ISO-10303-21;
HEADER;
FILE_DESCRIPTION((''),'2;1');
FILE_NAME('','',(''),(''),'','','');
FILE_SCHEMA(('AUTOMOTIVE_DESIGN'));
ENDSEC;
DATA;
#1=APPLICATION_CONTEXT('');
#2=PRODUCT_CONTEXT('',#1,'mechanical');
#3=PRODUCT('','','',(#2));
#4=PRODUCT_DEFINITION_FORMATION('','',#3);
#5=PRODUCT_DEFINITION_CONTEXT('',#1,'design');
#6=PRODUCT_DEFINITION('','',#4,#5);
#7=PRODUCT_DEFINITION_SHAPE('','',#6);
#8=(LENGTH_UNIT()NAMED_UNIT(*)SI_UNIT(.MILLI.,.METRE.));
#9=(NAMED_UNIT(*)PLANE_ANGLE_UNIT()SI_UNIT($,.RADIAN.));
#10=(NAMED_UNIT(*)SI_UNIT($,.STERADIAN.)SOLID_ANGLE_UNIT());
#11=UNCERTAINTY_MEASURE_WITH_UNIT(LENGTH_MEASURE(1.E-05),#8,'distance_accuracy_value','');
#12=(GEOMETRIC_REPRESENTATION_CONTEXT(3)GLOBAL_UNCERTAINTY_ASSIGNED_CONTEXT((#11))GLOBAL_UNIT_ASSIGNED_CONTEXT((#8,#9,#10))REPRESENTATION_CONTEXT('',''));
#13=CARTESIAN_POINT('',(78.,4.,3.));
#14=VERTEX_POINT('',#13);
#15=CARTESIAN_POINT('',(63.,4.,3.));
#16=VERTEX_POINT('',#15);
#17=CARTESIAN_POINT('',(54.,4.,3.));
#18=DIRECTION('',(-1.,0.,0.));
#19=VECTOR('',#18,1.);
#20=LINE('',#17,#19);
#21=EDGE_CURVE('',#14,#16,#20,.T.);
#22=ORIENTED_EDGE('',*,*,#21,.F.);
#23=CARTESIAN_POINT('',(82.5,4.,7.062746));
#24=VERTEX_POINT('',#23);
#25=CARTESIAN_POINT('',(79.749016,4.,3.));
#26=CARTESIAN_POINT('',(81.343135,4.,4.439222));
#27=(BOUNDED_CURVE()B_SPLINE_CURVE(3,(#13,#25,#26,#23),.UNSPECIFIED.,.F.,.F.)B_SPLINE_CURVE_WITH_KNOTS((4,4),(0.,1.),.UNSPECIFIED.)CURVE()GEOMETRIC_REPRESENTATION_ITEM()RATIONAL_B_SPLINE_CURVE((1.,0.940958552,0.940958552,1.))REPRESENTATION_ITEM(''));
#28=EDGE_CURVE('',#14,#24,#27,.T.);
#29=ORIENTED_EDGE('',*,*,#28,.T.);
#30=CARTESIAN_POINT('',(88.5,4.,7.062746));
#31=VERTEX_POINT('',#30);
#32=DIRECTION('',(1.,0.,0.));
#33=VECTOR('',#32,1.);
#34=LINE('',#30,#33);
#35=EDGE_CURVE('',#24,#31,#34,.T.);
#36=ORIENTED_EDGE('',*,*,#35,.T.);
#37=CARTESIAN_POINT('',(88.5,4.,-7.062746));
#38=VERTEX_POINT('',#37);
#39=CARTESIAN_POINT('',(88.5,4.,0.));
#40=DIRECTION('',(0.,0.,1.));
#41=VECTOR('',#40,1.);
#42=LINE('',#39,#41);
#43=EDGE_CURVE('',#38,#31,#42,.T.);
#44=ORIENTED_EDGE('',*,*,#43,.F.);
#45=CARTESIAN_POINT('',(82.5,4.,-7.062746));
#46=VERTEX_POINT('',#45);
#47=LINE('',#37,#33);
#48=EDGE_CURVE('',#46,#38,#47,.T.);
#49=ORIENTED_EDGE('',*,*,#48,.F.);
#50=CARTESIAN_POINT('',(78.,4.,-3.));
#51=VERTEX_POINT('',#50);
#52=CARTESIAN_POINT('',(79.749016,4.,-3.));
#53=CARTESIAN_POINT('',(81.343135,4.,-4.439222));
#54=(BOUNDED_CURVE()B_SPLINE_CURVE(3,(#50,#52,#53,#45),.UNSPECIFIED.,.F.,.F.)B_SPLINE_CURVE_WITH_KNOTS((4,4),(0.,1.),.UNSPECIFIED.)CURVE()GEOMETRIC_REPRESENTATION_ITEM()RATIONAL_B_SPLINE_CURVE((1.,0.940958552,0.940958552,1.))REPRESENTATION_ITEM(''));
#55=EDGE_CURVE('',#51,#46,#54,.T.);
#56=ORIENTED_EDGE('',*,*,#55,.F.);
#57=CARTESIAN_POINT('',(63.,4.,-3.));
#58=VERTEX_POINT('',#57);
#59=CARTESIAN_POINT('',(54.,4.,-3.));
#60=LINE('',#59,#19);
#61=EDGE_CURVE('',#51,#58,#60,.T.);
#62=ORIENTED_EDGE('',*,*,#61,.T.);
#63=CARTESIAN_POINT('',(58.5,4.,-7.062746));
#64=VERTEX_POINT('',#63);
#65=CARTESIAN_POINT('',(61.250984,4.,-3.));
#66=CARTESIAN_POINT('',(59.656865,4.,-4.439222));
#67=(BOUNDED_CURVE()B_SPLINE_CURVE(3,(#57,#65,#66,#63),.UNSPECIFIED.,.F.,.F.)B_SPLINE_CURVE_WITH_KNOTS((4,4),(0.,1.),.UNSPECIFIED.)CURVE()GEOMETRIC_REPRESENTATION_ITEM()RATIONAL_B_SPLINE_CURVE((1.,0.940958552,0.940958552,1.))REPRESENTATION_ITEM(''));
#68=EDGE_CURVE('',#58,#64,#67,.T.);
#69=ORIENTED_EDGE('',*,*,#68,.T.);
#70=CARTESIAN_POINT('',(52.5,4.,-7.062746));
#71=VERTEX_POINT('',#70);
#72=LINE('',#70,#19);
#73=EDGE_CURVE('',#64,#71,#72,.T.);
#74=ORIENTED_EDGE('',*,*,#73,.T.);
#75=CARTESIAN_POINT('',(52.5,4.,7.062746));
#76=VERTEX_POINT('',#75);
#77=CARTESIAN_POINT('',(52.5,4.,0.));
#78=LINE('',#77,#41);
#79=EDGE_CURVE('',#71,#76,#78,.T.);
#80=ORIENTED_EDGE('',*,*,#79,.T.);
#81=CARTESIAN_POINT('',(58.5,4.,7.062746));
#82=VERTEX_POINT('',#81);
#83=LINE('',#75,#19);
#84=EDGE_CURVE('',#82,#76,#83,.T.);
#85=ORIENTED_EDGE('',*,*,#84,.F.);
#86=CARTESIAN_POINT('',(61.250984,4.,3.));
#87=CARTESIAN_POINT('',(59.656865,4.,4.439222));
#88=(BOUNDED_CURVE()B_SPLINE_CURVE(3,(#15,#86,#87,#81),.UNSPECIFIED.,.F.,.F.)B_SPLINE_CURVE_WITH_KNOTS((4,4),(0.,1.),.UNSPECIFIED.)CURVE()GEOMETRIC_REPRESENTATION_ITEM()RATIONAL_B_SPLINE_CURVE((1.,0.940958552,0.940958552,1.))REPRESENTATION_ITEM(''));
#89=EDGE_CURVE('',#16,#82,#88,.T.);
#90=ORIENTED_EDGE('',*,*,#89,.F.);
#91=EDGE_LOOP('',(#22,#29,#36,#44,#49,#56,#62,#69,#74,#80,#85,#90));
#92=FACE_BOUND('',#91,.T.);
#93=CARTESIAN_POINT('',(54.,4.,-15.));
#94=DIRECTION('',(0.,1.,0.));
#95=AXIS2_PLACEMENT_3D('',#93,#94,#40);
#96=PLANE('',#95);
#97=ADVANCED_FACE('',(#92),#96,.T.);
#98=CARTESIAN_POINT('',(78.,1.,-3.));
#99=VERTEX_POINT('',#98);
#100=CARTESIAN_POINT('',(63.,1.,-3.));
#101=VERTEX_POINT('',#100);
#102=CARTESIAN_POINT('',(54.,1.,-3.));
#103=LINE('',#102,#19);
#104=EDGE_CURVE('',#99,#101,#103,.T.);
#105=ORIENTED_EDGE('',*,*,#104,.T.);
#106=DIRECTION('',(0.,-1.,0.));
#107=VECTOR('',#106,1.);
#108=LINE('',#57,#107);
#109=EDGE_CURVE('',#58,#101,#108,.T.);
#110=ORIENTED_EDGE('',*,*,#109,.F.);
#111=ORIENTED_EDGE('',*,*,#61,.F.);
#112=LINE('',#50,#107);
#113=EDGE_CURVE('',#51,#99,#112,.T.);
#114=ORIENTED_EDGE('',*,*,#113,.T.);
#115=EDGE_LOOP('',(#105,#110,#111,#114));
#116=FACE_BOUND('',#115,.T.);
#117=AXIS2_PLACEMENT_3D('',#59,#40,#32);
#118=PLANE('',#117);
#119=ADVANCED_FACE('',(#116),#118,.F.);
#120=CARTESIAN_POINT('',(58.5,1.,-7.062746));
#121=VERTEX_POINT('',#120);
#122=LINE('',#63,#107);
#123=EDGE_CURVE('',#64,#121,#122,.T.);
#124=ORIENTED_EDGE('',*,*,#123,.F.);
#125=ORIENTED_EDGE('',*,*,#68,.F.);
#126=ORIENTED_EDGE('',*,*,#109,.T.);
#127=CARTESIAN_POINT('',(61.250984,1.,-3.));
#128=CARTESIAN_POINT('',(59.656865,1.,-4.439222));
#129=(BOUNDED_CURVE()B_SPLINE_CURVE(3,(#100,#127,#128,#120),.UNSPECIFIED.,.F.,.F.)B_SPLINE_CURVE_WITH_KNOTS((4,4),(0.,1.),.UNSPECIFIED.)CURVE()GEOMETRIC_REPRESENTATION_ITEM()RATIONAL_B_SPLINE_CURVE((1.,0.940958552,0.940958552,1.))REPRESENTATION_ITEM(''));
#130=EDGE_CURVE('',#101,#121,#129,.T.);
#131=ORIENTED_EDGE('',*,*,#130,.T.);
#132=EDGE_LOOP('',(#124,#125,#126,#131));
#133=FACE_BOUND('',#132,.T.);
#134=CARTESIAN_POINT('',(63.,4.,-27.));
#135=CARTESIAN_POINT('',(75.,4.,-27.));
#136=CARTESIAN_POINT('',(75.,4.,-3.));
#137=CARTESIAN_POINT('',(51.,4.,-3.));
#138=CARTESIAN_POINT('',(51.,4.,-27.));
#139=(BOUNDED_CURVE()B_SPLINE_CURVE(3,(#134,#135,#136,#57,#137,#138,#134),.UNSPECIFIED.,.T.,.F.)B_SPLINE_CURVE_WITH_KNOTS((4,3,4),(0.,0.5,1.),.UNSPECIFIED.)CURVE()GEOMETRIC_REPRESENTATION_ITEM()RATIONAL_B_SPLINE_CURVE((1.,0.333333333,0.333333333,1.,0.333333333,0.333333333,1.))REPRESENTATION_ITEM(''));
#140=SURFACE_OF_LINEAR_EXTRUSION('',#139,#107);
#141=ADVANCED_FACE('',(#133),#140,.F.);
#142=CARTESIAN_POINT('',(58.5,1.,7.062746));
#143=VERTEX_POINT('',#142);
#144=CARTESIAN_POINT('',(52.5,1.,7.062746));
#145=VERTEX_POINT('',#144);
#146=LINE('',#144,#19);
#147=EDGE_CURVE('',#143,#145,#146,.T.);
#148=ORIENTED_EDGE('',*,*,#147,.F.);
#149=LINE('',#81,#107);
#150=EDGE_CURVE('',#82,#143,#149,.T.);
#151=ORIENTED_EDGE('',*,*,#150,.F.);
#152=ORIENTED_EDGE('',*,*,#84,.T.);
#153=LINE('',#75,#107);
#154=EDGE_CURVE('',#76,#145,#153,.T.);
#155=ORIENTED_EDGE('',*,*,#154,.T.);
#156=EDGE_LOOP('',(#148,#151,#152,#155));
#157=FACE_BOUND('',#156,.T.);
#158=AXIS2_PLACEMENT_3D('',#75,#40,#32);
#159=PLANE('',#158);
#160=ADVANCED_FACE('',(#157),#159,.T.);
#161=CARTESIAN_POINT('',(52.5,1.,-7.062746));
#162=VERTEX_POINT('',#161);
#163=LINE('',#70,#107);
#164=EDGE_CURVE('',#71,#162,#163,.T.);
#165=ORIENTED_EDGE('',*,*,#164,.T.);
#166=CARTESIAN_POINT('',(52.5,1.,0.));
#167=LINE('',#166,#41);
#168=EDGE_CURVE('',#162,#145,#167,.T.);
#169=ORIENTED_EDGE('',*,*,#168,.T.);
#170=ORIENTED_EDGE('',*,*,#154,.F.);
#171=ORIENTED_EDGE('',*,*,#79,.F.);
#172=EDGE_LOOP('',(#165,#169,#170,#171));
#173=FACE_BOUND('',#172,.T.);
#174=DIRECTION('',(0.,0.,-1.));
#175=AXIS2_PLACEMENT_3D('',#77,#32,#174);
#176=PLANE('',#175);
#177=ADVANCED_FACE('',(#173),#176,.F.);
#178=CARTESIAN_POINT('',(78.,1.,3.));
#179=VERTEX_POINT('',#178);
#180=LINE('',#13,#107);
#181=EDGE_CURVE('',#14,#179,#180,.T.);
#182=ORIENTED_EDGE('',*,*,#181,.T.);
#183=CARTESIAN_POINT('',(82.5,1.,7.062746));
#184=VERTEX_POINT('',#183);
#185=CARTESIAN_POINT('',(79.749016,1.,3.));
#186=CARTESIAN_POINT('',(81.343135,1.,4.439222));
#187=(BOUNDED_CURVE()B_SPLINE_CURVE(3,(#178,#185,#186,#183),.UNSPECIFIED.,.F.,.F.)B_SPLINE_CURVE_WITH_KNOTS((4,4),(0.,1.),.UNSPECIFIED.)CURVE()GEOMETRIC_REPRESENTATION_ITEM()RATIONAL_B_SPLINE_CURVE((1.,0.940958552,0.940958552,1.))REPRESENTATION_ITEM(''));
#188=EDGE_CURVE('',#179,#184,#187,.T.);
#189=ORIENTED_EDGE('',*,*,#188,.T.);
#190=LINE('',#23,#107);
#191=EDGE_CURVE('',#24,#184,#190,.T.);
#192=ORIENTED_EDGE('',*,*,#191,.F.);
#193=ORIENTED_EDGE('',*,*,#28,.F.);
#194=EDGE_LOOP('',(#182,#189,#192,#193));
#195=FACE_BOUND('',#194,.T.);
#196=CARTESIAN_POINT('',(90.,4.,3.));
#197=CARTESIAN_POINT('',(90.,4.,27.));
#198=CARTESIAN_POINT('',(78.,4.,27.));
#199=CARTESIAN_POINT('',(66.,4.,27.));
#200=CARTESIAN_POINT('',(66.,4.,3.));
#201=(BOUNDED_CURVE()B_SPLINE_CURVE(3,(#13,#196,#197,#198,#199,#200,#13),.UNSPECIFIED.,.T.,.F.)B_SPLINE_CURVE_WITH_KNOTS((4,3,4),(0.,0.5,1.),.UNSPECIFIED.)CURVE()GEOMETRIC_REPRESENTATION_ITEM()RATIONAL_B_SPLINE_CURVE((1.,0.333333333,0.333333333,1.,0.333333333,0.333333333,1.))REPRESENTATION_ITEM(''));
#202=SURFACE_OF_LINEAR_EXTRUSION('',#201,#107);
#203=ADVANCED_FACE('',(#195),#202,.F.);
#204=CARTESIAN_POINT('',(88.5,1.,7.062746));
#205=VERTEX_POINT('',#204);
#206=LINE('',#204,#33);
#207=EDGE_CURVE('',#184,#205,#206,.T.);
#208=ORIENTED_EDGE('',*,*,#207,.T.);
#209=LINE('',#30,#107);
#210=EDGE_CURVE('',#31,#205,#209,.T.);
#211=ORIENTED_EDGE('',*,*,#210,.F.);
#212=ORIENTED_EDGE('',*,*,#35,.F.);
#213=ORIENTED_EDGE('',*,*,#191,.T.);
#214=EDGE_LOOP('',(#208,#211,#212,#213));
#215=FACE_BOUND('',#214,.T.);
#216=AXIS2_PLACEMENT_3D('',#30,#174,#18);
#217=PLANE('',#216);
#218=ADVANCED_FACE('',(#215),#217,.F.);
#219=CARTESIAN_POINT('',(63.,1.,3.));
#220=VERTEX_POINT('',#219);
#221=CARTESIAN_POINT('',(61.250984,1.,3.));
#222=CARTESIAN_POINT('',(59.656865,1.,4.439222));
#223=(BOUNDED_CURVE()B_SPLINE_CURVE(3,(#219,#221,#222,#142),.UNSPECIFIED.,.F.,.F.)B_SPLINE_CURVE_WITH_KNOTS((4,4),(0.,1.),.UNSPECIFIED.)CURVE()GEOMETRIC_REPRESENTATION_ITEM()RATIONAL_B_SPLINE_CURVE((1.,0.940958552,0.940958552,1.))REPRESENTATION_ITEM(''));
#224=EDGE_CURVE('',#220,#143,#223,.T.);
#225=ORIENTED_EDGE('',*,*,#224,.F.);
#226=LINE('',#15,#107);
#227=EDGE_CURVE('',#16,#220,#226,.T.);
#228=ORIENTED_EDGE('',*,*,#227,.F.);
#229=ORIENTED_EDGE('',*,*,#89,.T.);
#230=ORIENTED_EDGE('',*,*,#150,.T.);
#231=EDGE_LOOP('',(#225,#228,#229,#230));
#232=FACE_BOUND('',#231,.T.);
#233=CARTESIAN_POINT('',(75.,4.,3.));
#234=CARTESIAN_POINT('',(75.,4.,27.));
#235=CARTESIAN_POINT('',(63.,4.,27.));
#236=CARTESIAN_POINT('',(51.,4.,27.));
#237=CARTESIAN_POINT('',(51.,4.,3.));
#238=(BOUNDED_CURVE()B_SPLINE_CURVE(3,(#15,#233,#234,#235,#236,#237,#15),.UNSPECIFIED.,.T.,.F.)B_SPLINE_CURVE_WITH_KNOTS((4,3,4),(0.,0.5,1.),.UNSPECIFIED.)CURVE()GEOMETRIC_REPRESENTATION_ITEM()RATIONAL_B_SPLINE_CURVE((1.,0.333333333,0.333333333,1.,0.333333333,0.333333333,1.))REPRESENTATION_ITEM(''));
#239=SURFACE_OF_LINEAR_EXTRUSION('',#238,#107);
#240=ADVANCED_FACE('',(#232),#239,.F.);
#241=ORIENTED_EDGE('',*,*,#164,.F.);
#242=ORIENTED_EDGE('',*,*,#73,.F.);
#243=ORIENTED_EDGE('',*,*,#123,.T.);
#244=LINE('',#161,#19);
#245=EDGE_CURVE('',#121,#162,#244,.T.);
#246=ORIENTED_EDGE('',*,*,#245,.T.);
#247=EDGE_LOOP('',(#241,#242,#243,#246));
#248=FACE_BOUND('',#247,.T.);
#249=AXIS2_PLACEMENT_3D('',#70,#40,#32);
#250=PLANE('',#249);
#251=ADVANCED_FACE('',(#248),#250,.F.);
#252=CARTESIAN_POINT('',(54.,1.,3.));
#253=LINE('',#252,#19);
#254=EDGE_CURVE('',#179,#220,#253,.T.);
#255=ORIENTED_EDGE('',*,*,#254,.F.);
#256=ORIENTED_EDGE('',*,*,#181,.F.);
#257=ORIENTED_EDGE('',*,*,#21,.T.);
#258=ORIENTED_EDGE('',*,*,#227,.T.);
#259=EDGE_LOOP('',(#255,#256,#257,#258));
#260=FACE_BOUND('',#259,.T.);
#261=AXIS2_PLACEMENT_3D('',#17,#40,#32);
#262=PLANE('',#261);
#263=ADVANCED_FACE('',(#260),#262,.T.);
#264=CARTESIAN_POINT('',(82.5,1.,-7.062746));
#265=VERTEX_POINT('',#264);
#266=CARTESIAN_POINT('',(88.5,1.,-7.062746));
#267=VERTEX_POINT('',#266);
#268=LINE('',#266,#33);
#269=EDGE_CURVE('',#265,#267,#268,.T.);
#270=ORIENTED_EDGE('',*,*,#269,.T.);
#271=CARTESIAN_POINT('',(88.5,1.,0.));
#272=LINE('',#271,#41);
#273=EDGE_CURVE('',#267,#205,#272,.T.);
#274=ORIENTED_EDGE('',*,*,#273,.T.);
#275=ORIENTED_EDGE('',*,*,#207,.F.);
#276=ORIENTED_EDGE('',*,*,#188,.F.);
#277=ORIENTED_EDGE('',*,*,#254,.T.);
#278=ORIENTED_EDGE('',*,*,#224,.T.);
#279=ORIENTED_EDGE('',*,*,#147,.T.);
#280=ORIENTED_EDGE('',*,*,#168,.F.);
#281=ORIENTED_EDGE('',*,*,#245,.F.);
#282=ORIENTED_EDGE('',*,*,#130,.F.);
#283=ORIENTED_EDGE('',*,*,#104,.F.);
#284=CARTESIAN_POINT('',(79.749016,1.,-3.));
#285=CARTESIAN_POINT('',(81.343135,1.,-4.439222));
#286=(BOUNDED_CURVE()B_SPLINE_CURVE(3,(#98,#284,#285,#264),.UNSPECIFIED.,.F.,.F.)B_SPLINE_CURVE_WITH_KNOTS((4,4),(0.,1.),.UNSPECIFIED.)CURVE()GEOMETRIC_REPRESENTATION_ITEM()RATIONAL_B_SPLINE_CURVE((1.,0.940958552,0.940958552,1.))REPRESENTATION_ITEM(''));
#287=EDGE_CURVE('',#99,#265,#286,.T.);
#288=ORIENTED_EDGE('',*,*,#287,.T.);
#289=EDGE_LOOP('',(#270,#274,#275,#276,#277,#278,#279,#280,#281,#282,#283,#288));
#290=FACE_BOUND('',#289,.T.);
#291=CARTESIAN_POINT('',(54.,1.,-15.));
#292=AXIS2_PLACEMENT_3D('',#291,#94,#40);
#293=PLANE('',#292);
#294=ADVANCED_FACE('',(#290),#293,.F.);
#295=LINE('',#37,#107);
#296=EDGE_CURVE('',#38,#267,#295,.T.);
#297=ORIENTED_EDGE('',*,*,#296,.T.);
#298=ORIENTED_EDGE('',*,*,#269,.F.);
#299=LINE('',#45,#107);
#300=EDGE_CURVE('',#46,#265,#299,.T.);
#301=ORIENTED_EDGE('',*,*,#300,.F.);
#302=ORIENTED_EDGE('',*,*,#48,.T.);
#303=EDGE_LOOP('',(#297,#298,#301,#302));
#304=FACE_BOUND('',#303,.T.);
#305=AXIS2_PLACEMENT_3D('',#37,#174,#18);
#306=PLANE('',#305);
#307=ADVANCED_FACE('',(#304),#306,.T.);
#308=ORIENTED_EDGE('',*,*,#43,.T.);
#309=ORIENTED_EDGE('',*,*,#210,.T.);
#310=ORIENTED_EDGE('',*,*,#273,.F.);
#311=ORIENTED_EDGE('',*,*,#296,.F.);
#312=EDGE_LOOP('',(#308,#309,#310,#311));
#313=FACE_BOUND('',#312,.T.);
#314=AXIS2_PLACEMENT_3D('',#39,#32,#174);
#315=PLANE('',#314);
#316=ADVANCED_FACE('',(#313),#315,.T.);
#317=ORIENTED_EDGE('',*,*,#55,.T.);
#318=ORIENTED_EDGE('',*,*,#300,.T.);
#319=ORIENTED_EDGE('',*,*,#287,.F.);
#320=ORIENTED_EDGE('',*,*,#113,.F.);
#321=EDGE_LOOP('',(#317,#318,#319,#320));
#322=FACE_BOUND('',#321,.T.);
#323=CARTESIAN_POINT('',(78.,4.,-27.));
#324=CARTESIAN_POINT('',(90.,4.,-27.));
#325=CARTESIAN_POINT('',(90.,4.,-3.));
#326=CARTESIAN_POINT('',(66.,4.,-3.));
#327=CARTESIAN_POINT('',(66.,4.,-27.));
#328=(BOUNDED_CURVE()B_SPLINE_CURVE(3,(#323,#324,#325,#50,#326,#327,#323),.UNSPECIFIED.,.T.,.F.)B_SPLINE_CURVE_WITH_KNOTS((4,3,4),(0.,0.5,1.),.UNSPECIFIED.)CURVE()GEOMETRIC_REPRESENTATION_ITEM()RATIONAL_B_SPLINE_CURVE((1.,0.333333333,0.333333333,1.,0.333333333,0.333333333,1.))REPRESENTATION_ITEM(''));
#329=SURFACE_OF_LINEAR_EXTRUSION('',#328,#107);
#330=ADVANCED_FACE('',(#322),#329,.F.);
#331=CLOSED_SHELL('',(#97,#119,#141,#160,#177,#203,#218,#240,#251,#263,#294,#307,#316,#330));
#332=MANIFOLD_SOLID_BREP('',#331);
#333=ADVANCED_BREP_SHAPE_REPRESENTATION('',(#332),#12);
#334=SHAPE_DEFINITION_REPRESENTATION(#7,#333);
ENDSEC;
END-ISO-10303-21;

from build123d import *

# Parameters (mm, degrees)
BOSS_EXTRUDE1_DEPTH         = 5
MIRROR1_DEPTH               = 5
SCALE1_SCALE                = 0.6
SCALE2_SCALE_X              = 0.5
SCALE2_SCALE_Y              = 1
SCALE2_SCALE_Z              = 1
SKETCH2_W                   = 9
SKETCH2_H                   = 6
CUT_EXTRUDE1_DEPTH          = 98.801494894
BODY_MOVE_COPY1_START       = 1
BODY_MOVE_COPY1_DEPTH       = 3
BODY_MOVE_COPY1_2_OUTLINE_W = 9
BODY_MOVE_COPY1_2_OUTLINE_H = 6
BODY_MOVE_COPY1_2_DEPTH     = 3


# Read off the part's stored shape, not the designer's step: Mirror1, Body-Move/Copy1
with BuildPart() as part:
    # Sketch1 → Boss-Extrude1 (new body)
    with BuildSketch(Plane(origin=(0, 0, 0), x_dir=(1, 0, 0), z_dir=(0, 1, 0))):
        with BuildLine():
            Line((0, 0), (0, 11.771243445))
            Line((0, 11.771243445), (20, 11.771243445))
            ThreePointArc((20, 11.771243445), (26.771243445, 6.771243445), (35, 5))
            Line((35, 5), (75, 5))
            Line((75, 5), (75, 0))
            Line((75, 0), (0, 0))
        make_face()
    extrude(amount=BOSS_EXTRUDE1_DEPTH)

    # Mirror1 outline → Mirror1 (add)
    with BuildSketch(Plane(origin=(0, 0, 0), x_dir=(1, 0, 0), z_dir=(0, 1, 0))):
        with BuildLine():
            Line((115, 5), (75, 5))
            Line((75, 5), (75, 0))
            Line((75, 0), (0, 0))
            Line((0, 0), (0, -11.771243445))
            Line((0, -11.771243445), (20, -11.771243445))
            ThreePointArc((20, -11.771243445), (26.771243445, -6.771243445), (35, -5))
            Line((35, -5), (115, -5))
            ThreePointArc((115, -5), (123.228756555, -6.771243445), (130, -11.771243445))
            Line((130, -11.771243445), (150, -11.771243445))
            Line((150, -11.771243445), (150, 11.771243445))
            Line((150, 11.771243445), (130, 11.771243445))
            ThreePointArc((130, 11.771243445), (123.228756555, 6.771243445), (115, 5))
        make_face()
    extrude(amount=MIRROR1_DEPTH)


with BuildPart() as part_1:
    # Scale1: scaled about (75, 2.5, 0)
    add(part.part.scale(SCALE1_SCALE).moved(Location((30, 1, 0))))


with BuildPart() as part_2:
    # Scale2: scaled about (75, 2.5, 0)
    add(part_1.part.scale((SCALE2_SCALE_X, SCALE2_SCALE_Y, SCALE2_SCALE_Z), about=(75, 2.5, 0)))

    # Sketch2 → Cut-Extrude1 (cut, through all)
    with BuildSketch(Plane(origin=(0, 4, 0), x_dir=(1, 0, 0), z_dir=(0, 1, 0))):
        with Locations((70.5, 0)):
            Rectangle(SKETCH2_W, SKETCH2_H)
    extrude(amount=-CUT_EXTRUDE1_DEPTH, mode=Mode.SUBTRACT)


with BuildPart() as cut_extrude1_piece_1:
    # of the separate pieces the step leaves, piece 1, a body of its own (cut_extrude1_pieces)
    add(part_2.part.solids().sort_by_distance((75, 1, 3))[0])

    # Body-Move/Copy1 outline → Body-Move/Copy1 (cut)
    with BuildSketch(Plane(origin=(0, 0, 0), x_dir=(1, 0, 0), z_dir=(0, 1, 0)).offset(BODY_MOVE_COPY1_START)):
        with BuildLine():
            add(Edge.make_bspline(
                [(91.5, 7.062746067), (90.655623636, 5.147880462), (89.601040636, 3.949624901), (88.5, 3.381049961)],
                knots=[0.344491118, 0.344491118, 0.344491118, 0.344491118, 0.443649167, 0.443649167, 0.443649167, 0.443649167], degree=3, weights=[0.571428571, 0.621399531, 0.697590007, 0.8]))
            Line((88.5, 3.381049961), (88.5, -3.381049961))
            add(Edge.make_bspline(
                [(88.5, -3.381049961), (89.601040636, -3.949624901), (90.655623636, -5.147880462), (91.5, -7.062746067)],
                knots=[0.056350833, 0.056350833, 0.056350833, 0.056350833, 0.155508882, 0.155508882, 0.155508882, 0.155508882], degree=3, weights=[0.8, 0.697590007, 0.621399531, 0.571428571]))
            Line((91.5, -7.062746067), (97.5, -7.062746067))
            Line((97.5, -7.062746067), (97.5, 7.062746067))
            Line((97.5, 7.062746067), (91.5, 7.062746067))
        make_face()
    extrude(amount=BODY_MOVE_COPY1_DEPTH, mode=Mode.SUBTRACT)

    # Body-Move_Copy1 2 outline → Body-Move_Copy1 2 (add)
    with BuildSketch(Plane(origin=(0, 0, 0), x_dir=(1, 0, 0), z_dir=(0, 1, 0)).offset(BODY_MOVE_COPY1_START)):
        with BuildLine():
            Line((88.5, 7.062746067), (82.5, 7.062746067))
            add(Edge.make_bspline(
                [(82.5, 7.062746067), (81.233643288, 4.190918983), (79.569499126, 3), (78, 3)],
                knots=[0.344491118, 0.344491118, 0.344491118, 0.344491118, 0.5, 0.5, 0.5, 0.5], degree=3, weights=[0.571428571, 0.649797681, 0.792654824, 1]))
            Line((78, 3), (87, 3))
            add(Edge.make_bspline(
                [(88.5, 3.381049961), (87.991386346, 3.118403), (87.487429398, 3), (87, 3)],
                knots=[0.443649167, 0.443649167, 0.443649167, 0.443649167, 0.5, 0.5, 0.5, 0.5], degree=3, weights=[0.8, 0.85819889, 0.924865556, 1]))
            Line((88.5, 3.381049961), (88.5, 7.062746067))
        make_face()
        with Locations((70.5, 0)):
            Rectangle(BODY_MOVE_COPY1_2_OUTLINE_W, BODY_MOVE_COPY1_2_OUTLINE_H)
        with BuildLine():
            Line((88.5, -7.062746067), (88.5, -3.381049961))
            add(Edge.make_bspline(
                [(87, -3), (87.487429398, -3), (87.991386346, -3.118403), (88.5, -3.381049961)],
                knots=[0, 0, 0, 0, 0.056350833, 0.056350833, 0.056350833, 0.056350833], degree=3, weights=[1, 0.924865556, 0.85819889, 0.8]))
            Line((87, -3), (78, -3))
            add(Edge.make_bspline(
                [(78, -3), (79.569499126, -3), (81.233643288, -4.190918983), (82.5, -7.062746067)],
                knots=[0, 0, 0, 0, 0.155508882, 0.155508882, 0.155508882, 0.155508882], degree=3, weights=[1, 0.792654824, 0.649797681, 0.571428571]))
            Line((82.5, -7.062746067), (88.5, -7.062746067))
        make_face()
    extrude(amount=BODY_MOVE_COPY1_2_DEPTH)


with BuildPart() as cut_extrude1_piece_2:
    # of the separate pieces the step leaves, piece 2, a body of its own (cut_extrude1_pieces)
    add(part_2.part.solids().sort_by_distance((52.5, 1, -7.062746067))[0])


with BuildPart() as cut_extrude1_piece_1_1:
    add(cut_extrude1_piece_1.part)

    # Combine1: union Cut-Extrude1 piece 2
    add(cut_extrude1_piece_2.part)


solid = cut_extrude1_piece_1_1.part
